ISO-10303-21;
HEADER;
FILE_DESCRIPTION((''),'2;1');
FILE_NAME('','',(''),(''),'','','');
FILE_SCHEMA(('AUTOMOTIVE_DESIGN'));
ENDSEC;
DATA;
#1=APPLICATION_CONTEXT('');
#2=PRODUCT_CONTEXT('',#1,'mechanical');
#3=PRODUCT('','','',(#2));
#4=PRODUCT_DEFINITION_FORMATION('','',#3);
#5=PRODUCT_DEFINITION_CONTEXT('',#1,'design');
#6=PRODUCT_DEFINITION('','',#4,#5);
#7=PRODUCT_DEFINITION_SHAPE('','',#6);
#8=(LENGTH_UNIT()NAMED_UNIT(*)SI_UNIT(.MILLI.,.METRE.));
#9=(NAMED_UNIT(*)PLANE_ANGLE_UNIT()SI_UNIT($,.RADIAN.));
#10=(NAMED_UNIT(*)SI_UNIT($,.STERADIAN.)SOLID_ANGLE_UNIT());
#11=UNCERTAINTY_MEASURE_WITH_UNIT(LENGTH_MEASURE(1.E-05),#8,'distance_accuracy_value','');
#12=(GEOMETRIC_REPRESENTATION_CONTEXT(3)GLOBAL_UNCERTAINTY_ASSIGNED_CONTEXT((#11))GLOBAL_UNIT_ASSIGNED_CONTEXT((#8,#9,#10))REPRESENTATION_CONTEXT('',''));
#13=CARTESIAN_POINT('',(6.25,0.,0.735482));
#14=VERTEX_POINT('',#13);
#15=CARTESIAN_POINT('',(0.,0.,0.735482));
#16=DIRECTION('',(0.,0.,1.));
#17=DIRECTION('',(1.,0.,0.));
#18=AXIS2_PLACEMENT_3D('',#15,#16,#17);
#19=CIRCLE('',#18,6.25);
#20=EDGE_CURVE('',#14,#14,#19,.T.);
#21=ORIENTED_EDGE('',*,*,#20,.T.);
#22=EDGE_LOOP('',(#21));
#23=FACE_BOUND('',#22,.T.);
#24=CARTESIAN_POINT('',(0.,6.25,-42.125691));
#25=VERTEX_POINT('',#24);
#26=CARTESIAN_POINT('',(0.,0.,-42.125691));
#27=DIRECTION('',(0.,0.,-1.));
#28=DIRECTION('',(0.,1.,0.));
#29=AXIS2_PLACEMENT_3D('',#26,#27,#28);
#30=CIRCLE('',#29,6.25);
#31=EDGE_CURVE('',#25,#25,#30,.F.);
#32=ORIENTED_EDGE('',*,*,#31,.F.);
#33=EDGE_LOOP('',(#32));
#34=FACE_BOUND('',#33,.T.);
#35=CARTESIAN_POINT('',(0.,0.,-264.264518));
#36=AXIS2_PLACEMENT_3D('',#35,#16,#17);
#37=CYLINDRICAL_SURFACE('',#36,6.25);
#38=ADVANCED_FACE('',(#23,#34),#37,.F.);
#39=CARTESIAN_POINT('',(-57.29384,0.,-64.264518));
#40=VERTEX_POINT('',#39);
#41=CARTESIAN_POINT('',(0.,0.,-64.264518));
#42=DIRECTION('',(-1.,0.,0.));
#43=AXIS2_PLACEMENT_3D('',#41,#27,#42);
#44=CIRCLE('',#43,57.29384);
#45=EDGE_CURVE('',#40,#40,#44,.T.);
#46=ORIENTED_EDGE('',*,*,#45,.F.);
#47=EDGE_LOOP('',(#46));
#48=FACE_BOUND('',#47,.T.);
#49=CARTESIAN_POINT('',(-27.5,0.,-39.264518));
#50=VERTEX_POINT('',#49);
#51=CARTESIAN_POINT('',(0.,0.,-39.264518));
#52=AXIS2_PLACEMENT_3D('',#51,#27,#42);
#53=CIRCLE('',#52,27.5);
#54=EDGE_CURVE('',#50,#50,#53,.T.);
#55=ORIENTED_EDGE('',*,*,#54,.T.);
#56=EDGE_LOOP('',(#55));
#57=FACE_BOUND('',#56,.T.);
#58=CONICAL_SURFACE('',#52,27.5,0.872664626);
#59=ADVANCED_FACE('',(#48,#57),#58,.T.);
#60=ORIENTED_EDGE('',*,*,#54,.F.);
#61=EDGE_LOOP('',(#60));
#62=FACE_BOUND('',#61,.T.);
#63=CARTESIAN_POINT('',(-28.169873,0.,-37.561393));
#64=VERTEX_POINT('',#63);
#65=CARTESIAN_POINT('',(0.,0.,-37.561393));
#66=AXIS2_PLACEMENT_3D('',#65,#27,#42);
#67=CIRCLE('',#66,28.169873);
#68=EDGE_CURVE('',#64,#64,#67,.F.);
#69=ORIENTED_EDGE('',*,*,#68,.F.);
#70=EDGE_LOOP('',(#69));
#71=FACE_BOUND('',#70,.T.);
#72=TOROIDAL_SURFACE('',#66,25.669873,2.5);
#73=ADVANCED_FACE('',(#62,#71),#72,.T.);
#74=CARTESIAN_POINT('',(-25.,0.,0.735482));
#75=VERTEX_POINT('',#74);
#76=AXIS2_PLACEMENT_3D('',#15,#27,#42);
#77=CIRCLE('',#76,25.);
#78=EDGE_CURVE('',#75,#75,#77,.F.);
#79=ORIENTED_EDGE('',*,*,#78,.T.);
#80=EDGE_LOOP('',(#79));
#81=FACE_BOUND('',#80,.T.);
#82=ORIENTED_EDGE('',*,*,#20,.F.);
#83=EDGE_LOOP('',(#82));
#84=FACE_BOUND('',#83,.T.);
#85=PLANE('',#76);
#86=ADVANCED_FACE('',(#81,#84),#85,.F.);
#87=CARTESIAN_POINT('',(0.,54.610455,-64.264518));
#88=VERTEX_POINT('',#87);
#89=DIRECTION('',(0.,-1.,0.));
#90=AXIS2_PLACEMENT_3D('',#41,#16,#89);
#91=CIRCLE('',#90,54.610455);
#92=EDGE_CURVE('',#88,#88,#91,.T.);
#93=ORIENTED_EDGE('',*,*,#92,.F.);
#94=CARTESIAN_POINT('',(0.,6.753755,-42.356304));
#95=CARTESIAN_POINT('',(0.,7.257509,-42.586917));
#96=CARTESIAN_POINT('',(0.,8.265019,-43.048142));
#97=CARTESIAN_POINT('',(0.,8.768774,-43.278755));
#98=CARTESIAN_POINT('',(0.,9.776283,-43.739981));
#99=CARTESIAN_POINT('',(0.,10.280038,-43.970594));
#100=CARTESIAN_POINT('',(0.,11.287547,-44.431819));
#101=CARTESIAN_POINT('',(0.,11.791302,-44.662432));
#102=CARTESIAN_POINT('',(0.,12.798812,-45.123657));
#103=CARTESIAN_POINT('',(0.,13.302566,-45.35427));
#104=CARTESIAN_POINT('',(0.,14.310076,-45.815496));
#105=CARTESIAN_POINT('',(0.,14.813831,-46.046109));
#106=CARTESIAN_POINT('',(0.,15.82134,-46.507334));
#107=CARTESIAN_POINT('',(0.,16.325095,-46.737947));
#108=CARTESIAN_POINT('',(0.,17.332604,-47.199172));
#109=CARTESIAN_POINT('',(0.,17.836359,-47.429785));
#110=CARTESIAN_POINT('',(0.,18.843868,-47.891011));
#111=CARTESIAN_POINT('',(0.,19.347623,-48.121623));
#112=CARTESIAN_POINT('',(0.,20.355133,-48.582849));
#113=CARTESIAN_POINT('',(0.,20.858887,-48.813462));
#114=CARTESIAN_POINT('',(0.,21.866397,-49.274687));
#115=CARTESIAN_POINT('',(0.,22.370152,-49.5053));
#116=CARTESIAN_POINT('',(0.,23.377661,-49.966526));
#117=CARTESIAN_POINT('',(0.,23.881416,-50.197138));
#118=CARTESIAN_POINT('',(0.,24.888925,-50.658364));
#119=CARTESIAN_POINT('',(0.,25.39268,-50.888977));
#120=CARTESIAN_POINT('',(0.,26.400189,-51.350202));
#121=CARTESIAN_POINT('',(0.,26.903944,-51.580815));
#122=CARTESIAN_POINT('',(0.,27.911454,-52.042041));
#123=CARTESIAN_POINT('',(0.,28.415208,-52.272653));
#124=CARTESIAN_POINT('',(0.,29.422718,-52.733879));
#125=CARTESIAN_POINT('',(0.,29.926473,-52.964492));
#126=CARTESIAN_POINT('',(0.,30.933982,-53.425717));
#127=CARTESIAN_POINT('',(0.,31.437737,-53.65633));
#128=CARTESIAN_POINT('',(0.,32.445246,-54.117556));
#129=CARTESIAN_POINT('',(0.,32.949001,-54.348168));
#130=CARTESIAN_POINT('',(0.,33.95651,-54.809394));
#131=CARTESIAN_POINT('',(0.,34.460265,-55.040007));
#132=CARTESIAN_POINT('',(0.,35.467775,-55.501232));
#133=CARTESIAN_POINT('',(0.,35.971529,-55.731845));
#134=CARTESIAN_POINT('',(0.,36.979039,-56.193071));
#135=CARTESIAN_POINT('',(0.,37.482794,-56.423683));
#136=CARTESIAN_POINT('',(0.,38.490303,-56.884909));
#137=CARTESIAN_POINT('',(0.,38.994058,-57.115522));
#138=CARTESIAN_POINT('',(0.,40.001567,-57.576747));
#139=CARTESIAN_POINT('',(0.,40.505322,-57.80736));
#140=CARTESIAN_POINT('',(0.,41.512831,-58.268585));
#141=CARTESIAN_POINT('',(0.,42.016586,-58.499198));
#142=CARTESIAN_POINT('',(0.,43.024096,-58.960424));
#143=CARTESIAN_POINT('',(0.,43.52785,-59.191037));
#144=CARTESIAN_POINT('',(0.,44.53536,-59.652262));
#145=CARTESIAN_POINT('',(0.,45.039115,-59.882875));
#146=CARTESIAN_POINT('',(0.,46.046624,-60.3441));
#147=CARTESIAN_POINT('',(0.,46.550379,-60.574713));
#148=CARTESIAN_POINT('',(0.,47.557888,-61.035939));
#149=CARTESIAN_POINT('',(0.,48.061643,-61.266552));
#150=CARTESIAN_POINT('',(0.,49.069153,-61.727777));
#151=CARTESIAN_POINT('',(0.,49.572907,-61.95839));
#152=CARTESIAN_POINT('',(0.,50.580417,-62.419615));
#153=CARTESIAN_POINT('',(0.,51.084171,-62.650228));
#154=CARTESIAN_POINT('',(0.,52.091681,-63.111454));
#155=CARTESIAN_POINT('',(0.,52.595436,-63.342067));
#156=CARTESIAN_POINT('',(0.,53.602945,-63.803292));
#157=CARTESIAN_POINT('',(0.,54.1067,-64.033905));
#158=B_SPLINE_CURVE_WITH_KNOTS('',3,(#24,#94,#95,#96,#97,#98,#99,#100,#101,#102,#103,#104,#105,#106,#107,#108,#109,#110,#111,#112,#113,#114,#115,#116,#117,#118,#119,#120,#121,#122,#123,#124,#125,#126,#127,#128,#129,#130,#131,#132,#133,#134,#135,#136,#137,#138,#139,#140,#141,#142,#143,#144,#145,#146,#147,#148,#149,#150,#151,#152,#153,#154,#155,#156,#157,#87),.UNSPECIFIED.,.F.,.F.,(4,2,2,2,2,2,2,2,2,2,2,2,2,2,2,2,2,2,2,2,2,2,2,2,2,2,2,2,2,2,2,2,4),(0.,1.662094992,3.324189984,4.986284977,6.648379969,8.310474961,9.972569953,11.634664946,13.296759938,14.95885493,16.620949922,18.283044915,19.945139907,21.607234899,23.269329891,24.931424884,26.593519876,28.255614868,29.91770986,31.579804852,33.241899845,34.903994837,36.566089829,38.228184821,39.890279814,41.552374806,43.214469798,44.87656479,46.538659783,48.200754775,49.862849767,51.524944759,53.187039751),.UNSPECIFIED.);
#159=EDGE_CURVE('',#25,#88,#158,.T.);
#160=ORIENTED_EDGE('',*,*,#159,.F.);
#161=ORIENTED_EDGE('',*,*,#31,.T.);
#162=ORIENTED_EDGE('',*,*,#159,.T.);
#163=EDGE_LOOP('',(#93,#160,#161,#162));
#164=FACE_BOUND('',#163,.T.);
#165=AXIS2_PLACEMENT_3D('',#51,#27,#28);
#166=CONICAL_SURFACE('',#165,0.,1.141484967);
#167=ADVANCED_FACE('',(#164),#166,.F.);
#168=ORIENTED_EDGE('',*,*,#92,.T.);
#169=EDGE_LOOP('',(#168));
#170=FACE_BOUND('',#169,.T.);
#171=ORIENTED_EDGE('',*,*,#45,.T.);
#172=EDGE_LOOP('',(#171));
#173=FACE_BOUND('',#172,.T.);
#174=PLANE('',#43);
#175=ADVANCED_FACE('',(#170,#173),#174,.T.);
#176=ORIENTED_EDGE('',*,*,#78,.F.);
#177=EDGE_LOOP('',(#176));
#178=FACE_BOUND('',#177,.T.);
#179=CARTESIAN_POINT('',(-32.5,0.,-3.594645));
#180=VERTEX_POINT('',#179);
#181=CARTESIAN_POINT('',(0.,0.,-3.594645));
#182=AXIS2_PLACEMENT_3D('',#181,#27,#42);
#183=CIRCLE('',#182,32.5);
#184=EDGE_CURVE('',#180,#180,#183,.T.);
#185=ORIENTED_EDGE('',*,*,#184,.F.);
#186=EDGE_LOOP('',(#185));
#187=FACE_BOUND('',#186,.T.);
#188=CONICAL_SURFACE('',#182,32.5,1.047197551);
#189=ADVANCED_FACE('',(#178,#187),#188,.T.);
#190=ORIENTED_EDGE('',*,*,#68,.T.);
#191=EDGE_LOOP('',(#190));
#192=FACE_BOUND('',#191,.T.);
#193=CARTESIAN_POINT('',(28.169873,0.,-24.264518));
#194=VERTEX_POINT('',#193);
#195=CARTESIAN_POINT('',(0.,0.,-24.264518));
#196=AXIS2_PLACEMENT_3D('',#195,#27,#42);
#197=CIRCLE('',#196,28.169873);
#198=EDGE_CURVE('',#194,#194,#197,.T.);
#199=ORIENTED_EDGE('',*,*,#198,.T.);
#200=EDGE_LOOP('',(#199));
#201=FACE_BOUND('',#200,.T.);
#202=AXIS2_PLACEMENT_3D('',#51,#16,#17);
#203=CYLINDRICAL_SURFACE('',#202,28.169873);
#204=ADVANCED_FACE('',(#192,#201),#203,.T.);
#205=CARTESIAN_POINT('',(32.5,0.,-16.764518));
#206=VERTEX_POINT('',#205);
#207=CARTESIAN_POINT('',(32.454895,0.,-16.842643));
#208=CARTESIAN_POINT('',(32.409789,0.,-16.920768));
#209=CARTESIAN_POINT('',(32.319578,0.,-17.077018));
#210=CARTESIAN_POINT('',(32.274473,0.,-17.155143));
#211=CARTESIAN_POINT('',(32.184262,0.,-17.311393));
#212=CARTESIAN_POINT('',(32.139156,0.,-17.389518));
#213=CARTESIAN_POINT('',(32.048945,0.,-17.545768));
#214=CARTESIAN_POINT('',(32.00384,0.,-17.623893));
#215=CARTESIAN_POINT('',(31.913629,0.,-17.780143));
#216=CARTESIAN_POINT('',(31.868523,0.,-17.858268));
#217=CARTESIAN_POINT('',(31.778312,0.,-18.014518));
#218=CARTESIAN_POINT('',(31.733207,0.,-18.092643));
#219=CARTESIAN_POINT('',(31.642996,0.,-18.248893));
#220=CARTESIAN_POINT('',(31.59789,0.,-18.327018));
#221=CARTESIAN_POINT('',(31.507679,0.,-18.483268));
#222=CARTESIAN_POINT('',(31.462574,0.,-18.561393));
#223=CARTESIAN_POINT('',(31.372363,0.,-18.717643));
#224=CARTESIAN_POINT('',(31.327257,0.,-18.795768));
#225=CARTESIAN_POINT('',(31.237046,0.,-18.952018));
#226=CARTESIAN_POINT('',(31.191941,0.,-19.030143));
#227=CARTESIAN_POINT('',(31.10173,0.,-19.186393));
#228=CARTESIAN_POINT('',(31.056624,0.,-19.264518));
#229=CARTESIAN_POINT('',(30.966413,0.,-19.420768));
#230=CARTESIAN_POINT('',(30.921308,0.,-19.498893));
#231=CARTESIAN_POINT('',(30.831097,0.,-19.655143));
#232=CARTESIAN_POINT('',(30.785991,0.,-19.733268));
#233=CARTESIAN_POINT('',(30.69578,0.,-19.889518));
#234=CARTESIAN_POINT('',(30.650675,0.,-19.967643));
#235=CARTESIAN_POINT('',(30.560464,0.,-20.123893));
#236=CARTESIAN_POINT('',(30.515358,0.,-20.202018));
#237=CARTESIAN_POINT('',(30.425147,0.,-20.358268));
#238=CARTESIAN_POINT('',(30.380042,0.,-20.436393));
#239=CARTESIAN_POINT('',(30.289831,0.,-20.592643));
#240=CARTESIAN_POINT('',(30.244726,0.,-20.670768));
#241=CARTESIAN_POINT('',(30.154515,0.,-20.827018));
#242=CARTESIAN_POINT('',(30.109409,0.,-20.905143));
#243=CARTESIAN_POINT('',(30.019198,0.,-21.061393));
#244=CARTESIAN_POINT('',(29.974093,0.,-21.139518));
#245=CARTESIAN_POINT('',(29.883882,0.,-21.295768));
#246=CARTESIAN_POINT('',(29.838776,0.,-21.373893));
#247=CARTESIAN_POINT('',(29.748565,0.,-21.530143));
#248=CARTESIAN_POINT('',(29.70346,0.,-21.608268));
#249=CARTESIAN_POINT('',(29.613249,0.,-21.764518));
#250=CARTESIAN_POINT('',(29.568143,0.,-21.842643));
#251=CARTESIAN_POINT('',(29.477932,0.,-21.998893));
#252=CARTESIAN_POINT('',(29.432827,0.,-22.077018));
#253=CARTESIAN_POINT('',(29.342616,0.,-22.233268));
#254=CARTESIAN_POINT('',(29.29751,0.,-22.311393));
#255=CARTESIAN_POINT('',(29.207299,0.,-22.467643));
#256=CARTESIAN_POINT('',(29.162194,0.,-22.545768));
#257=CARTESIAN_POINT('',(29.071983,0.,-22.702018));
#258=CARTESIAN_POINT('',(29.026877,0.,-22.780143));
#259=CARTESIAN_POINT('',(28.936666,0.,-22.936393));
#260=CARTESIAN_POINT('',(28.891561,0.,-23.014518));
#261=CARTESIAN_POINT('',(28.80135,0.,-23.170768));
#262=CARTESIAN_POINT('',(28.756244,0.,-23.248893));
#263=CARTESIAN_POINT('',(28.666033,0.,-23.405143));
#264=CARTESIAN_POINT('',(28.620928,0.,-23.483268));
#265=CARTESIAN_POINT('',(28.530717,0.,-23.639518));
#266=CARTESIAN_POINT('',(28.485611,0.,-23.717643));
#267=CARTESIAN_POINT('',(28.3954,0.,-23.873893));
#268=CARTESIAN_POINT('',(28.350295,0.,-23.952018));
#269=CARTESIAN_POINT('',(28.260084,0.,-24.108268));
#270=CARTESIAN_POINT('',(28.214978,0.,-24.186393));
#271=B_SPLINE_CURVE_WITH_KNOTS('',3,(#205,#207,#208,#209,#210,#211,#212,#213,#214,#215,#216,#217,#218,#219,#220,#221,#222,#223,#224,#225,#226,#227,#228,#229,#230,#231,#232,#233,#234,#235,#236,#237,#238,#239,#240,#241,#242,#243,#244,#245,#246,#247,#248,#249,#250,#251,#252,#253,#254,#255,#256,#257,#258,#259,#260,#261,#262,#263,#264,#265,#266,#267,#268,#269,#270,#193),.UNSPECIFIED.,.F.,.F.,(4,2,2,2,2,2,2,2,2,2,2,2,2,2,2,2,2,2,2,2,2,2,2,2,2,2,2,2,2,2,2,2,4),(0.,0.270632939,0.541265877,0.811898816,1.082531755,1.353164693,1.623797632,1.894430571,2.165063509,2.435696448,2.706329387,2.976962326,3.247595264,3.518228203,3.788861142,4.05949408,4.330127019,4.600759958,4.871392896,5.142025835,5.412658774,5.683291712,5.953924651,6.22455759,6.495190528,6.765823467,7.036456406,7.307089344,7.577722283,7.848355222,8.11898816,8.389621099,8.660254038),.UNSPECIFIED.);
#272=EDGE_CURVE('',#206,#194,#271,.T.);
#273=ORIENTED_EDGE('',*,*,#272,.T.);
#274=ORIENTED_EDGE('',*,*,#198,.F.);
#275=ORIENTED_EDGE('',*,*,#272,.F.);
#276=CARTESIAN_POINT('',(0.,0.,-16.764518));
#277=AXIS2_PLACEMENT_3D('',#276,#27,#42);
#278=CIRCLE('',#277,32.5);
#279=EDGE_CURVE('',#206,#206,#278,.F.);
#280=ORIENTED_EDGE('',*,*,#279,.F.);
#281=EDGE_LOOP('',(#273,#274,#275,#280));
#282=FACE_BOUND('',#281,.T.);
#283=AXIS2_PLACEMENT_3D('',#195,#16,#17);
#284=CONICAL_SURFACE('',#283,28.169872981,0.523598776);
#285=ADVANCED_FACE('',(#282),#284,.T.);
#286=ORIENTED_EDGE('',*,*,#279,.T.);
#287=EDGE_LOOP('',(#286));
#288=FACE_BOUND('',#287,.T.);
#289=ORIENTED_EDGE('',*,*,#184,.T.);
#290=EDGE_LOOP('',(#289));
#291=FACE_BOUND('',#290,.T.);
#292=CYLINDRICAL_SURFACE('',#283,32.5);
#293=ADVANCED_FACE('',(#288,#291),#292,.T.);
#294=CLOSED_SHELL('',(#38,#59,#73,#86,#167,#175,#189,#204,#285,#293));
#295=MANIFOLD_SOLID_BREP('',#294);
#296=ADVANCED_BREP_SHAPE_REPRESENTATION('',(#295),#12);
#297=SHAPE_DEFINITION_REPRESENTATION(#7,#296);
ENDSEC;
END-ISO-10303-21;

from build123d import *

# Parameters (mm, degrees)
SKETCH56_R           = 6.5
BOSS_EXTRUDE10_DEPTH = 5
CHAMFER1_SIZE        = 1.5
CHAMFER1_SIZE2       = 0.866025404
CHAMFER2_SIZE        = 1.5
CHAMFER2_SIZE2       = 0.866025404
SKETCH59_R           = 5.633974596
BOSS_EXTRUDE12_DEPTH = 3
SKETCH60_R           = 5.5
BOSS_EXTRUDE13_DEPTH = 5
BOSS_EXTRUDE13_DRAFT = -50
SKETCH64_R           = 1.25
CUT_EXTRUDE3_DEPTH   = 53
FILLET3_R            = 0.5
SCALE1_SCALE         = 5


with BuildPart() as part:
    # Sketch56 → Boss-Extrude10 (new body)
    with BuildSketch(Plane(origin=(0, 0, -24.5), x_dir=(-1, 0, 0), z_dir=(0, 0, -1))):
        Circle(SKETCH56_R)
    extrude(amount=BOSS_EXTRUDE10_DEPTH)

    # Chamfer1
    chamfer1_edges = [part.edges().sort_by_distance(p)[0] for p in [
        (6.5, 0, -24.5),
    ]]
    chamfer1_side = [part.faces().sort_by_distance(p)[0] for p in [
        (0, 0, -24.5),
    ]]
    chamfer(chamfer1_edges, length=CHAMFER1_SIZE, length2=CHAMFER1_SIZE2, reference=chamfer1_side[0])

    # Chamfer2
    chamfer2_edges = [part.edges().sort_by_distance(p)[0] for p in [
        (6.5, 0, -29.5),
    ]]
    chamfer2_side = [part.faces().sort_by_distance(p)[0] for p in [
        (6.5, 0, -27.433012702),
    ]]
    chamfer(chamfer2_edges, length=CHAMFER2_SIZE, length2=CHAMFER2_SIZE2, reference=chamfer2_side[0])

    # Sketch59 → Boss-Extrude12 (add)
    with BuildSketch(Plane(origin=(0, 0, -29.5), x_dir=(-1, 0, 0), z_dir=(0, 0, -1))):
        with Locations(Location((0, 0, 0), (0, 0, 180))):
            Circle(SKETCH59_R)
    extrude(amount=BOSS_EXTRUDE12_DEPTH)


with BuildPart() as boss_extrude13_tool:
    # Sketch60 → Boss-Extrude13 (with draft: the straight prism first)
    with BuildSketch(Plane(origin=(0, 0, -32.5), x_dir=(-1, 0, 0), z_dir=(0, 0, -1))):
        Circle(SKETCH60_R)
    extrude(amount=BOSS_EXTRUDE13_DEPTH)
    # Boss-Extrude13: the draft: its side faces are tilted about the plane it starts from
    boss_extrude13_sides = [boss_extrude13_tool.faces().sort_by_distance(p)[0] for p in [
        (5.5, 0, -35),
    ]]
    draft(boss_extrude13_sides, Plane(origin=(0, 0, -32.5), x_dir=(-1, 0, 0), z_dir=(0, 0, -1)), BOSS_EXTRUDE13_DRAFT)


with BuildPart() as part_1:
    add(part.part)

    # Boss-Extrude13: add boss_extrude13_tool
    add(boss_extrude13_tool.part)

    # Sketch62 → Cut-Revolve2 (revolve, cut)
    with BuildSketch(Plane(origin=(0, 0, 0), x_dir=(0, 0, -1), z_dir=(1, 0, 0)), mode=Mode.PRIVATE) as cut_revolve2_sk:
        Polygon((32.5, 0), (37.5, 10.922090923), (37.5, 0), align=None)
    revolve(cut_revolve2_sk.sketch.rotate(Axis((0, 0, -32.5), (0, 0, -1)), 90), axis=Axis((0, 0, -32.5), (0, 0, -1)), mode=Mode.SUBTRACT)

    # Sketch64 → Cut-Extrude3 (cut)
    with BuildSketch(Plane.XY.offset(-24.5)):
        Circle(SKETCH64_R)
    extrude(amount=-CUT_EXTRUDE3_DEPTH, mode=Mode.SUBTRACT)

    # Fillet3
    # the kernel refuses this fillet: 0.5 mm, written as the material it takes off along each edge
    with BuildSketch(Plane(origin=(0, 0, -32.5), x_dir=(1, 0, 0), z_dir=(0, 1, 0))) as fillet3_piece_1:
        with BuildLine():
            CenterArc((5.133974596, -0.340625019), FILLET3_R, 0, 42.941402865)
            Line((5.5, 0), (5.633974596, 0))
            Line((5.633974596, 0), (5.633974596, -0.340625019))
        make_face()
    revolve(axis=Axis((0, 0, -32.5), (0, 0, -1)), mode=Mode.SUBTRACT)


with BuildPart() as part_2:
    # Scale1: scaled about (0, 0, -30.8088706)
    add(part_1.part.scale(SCALE1_SCALE).moved(Location((0, 0, 123.2354824))))


solid = part_2.part
